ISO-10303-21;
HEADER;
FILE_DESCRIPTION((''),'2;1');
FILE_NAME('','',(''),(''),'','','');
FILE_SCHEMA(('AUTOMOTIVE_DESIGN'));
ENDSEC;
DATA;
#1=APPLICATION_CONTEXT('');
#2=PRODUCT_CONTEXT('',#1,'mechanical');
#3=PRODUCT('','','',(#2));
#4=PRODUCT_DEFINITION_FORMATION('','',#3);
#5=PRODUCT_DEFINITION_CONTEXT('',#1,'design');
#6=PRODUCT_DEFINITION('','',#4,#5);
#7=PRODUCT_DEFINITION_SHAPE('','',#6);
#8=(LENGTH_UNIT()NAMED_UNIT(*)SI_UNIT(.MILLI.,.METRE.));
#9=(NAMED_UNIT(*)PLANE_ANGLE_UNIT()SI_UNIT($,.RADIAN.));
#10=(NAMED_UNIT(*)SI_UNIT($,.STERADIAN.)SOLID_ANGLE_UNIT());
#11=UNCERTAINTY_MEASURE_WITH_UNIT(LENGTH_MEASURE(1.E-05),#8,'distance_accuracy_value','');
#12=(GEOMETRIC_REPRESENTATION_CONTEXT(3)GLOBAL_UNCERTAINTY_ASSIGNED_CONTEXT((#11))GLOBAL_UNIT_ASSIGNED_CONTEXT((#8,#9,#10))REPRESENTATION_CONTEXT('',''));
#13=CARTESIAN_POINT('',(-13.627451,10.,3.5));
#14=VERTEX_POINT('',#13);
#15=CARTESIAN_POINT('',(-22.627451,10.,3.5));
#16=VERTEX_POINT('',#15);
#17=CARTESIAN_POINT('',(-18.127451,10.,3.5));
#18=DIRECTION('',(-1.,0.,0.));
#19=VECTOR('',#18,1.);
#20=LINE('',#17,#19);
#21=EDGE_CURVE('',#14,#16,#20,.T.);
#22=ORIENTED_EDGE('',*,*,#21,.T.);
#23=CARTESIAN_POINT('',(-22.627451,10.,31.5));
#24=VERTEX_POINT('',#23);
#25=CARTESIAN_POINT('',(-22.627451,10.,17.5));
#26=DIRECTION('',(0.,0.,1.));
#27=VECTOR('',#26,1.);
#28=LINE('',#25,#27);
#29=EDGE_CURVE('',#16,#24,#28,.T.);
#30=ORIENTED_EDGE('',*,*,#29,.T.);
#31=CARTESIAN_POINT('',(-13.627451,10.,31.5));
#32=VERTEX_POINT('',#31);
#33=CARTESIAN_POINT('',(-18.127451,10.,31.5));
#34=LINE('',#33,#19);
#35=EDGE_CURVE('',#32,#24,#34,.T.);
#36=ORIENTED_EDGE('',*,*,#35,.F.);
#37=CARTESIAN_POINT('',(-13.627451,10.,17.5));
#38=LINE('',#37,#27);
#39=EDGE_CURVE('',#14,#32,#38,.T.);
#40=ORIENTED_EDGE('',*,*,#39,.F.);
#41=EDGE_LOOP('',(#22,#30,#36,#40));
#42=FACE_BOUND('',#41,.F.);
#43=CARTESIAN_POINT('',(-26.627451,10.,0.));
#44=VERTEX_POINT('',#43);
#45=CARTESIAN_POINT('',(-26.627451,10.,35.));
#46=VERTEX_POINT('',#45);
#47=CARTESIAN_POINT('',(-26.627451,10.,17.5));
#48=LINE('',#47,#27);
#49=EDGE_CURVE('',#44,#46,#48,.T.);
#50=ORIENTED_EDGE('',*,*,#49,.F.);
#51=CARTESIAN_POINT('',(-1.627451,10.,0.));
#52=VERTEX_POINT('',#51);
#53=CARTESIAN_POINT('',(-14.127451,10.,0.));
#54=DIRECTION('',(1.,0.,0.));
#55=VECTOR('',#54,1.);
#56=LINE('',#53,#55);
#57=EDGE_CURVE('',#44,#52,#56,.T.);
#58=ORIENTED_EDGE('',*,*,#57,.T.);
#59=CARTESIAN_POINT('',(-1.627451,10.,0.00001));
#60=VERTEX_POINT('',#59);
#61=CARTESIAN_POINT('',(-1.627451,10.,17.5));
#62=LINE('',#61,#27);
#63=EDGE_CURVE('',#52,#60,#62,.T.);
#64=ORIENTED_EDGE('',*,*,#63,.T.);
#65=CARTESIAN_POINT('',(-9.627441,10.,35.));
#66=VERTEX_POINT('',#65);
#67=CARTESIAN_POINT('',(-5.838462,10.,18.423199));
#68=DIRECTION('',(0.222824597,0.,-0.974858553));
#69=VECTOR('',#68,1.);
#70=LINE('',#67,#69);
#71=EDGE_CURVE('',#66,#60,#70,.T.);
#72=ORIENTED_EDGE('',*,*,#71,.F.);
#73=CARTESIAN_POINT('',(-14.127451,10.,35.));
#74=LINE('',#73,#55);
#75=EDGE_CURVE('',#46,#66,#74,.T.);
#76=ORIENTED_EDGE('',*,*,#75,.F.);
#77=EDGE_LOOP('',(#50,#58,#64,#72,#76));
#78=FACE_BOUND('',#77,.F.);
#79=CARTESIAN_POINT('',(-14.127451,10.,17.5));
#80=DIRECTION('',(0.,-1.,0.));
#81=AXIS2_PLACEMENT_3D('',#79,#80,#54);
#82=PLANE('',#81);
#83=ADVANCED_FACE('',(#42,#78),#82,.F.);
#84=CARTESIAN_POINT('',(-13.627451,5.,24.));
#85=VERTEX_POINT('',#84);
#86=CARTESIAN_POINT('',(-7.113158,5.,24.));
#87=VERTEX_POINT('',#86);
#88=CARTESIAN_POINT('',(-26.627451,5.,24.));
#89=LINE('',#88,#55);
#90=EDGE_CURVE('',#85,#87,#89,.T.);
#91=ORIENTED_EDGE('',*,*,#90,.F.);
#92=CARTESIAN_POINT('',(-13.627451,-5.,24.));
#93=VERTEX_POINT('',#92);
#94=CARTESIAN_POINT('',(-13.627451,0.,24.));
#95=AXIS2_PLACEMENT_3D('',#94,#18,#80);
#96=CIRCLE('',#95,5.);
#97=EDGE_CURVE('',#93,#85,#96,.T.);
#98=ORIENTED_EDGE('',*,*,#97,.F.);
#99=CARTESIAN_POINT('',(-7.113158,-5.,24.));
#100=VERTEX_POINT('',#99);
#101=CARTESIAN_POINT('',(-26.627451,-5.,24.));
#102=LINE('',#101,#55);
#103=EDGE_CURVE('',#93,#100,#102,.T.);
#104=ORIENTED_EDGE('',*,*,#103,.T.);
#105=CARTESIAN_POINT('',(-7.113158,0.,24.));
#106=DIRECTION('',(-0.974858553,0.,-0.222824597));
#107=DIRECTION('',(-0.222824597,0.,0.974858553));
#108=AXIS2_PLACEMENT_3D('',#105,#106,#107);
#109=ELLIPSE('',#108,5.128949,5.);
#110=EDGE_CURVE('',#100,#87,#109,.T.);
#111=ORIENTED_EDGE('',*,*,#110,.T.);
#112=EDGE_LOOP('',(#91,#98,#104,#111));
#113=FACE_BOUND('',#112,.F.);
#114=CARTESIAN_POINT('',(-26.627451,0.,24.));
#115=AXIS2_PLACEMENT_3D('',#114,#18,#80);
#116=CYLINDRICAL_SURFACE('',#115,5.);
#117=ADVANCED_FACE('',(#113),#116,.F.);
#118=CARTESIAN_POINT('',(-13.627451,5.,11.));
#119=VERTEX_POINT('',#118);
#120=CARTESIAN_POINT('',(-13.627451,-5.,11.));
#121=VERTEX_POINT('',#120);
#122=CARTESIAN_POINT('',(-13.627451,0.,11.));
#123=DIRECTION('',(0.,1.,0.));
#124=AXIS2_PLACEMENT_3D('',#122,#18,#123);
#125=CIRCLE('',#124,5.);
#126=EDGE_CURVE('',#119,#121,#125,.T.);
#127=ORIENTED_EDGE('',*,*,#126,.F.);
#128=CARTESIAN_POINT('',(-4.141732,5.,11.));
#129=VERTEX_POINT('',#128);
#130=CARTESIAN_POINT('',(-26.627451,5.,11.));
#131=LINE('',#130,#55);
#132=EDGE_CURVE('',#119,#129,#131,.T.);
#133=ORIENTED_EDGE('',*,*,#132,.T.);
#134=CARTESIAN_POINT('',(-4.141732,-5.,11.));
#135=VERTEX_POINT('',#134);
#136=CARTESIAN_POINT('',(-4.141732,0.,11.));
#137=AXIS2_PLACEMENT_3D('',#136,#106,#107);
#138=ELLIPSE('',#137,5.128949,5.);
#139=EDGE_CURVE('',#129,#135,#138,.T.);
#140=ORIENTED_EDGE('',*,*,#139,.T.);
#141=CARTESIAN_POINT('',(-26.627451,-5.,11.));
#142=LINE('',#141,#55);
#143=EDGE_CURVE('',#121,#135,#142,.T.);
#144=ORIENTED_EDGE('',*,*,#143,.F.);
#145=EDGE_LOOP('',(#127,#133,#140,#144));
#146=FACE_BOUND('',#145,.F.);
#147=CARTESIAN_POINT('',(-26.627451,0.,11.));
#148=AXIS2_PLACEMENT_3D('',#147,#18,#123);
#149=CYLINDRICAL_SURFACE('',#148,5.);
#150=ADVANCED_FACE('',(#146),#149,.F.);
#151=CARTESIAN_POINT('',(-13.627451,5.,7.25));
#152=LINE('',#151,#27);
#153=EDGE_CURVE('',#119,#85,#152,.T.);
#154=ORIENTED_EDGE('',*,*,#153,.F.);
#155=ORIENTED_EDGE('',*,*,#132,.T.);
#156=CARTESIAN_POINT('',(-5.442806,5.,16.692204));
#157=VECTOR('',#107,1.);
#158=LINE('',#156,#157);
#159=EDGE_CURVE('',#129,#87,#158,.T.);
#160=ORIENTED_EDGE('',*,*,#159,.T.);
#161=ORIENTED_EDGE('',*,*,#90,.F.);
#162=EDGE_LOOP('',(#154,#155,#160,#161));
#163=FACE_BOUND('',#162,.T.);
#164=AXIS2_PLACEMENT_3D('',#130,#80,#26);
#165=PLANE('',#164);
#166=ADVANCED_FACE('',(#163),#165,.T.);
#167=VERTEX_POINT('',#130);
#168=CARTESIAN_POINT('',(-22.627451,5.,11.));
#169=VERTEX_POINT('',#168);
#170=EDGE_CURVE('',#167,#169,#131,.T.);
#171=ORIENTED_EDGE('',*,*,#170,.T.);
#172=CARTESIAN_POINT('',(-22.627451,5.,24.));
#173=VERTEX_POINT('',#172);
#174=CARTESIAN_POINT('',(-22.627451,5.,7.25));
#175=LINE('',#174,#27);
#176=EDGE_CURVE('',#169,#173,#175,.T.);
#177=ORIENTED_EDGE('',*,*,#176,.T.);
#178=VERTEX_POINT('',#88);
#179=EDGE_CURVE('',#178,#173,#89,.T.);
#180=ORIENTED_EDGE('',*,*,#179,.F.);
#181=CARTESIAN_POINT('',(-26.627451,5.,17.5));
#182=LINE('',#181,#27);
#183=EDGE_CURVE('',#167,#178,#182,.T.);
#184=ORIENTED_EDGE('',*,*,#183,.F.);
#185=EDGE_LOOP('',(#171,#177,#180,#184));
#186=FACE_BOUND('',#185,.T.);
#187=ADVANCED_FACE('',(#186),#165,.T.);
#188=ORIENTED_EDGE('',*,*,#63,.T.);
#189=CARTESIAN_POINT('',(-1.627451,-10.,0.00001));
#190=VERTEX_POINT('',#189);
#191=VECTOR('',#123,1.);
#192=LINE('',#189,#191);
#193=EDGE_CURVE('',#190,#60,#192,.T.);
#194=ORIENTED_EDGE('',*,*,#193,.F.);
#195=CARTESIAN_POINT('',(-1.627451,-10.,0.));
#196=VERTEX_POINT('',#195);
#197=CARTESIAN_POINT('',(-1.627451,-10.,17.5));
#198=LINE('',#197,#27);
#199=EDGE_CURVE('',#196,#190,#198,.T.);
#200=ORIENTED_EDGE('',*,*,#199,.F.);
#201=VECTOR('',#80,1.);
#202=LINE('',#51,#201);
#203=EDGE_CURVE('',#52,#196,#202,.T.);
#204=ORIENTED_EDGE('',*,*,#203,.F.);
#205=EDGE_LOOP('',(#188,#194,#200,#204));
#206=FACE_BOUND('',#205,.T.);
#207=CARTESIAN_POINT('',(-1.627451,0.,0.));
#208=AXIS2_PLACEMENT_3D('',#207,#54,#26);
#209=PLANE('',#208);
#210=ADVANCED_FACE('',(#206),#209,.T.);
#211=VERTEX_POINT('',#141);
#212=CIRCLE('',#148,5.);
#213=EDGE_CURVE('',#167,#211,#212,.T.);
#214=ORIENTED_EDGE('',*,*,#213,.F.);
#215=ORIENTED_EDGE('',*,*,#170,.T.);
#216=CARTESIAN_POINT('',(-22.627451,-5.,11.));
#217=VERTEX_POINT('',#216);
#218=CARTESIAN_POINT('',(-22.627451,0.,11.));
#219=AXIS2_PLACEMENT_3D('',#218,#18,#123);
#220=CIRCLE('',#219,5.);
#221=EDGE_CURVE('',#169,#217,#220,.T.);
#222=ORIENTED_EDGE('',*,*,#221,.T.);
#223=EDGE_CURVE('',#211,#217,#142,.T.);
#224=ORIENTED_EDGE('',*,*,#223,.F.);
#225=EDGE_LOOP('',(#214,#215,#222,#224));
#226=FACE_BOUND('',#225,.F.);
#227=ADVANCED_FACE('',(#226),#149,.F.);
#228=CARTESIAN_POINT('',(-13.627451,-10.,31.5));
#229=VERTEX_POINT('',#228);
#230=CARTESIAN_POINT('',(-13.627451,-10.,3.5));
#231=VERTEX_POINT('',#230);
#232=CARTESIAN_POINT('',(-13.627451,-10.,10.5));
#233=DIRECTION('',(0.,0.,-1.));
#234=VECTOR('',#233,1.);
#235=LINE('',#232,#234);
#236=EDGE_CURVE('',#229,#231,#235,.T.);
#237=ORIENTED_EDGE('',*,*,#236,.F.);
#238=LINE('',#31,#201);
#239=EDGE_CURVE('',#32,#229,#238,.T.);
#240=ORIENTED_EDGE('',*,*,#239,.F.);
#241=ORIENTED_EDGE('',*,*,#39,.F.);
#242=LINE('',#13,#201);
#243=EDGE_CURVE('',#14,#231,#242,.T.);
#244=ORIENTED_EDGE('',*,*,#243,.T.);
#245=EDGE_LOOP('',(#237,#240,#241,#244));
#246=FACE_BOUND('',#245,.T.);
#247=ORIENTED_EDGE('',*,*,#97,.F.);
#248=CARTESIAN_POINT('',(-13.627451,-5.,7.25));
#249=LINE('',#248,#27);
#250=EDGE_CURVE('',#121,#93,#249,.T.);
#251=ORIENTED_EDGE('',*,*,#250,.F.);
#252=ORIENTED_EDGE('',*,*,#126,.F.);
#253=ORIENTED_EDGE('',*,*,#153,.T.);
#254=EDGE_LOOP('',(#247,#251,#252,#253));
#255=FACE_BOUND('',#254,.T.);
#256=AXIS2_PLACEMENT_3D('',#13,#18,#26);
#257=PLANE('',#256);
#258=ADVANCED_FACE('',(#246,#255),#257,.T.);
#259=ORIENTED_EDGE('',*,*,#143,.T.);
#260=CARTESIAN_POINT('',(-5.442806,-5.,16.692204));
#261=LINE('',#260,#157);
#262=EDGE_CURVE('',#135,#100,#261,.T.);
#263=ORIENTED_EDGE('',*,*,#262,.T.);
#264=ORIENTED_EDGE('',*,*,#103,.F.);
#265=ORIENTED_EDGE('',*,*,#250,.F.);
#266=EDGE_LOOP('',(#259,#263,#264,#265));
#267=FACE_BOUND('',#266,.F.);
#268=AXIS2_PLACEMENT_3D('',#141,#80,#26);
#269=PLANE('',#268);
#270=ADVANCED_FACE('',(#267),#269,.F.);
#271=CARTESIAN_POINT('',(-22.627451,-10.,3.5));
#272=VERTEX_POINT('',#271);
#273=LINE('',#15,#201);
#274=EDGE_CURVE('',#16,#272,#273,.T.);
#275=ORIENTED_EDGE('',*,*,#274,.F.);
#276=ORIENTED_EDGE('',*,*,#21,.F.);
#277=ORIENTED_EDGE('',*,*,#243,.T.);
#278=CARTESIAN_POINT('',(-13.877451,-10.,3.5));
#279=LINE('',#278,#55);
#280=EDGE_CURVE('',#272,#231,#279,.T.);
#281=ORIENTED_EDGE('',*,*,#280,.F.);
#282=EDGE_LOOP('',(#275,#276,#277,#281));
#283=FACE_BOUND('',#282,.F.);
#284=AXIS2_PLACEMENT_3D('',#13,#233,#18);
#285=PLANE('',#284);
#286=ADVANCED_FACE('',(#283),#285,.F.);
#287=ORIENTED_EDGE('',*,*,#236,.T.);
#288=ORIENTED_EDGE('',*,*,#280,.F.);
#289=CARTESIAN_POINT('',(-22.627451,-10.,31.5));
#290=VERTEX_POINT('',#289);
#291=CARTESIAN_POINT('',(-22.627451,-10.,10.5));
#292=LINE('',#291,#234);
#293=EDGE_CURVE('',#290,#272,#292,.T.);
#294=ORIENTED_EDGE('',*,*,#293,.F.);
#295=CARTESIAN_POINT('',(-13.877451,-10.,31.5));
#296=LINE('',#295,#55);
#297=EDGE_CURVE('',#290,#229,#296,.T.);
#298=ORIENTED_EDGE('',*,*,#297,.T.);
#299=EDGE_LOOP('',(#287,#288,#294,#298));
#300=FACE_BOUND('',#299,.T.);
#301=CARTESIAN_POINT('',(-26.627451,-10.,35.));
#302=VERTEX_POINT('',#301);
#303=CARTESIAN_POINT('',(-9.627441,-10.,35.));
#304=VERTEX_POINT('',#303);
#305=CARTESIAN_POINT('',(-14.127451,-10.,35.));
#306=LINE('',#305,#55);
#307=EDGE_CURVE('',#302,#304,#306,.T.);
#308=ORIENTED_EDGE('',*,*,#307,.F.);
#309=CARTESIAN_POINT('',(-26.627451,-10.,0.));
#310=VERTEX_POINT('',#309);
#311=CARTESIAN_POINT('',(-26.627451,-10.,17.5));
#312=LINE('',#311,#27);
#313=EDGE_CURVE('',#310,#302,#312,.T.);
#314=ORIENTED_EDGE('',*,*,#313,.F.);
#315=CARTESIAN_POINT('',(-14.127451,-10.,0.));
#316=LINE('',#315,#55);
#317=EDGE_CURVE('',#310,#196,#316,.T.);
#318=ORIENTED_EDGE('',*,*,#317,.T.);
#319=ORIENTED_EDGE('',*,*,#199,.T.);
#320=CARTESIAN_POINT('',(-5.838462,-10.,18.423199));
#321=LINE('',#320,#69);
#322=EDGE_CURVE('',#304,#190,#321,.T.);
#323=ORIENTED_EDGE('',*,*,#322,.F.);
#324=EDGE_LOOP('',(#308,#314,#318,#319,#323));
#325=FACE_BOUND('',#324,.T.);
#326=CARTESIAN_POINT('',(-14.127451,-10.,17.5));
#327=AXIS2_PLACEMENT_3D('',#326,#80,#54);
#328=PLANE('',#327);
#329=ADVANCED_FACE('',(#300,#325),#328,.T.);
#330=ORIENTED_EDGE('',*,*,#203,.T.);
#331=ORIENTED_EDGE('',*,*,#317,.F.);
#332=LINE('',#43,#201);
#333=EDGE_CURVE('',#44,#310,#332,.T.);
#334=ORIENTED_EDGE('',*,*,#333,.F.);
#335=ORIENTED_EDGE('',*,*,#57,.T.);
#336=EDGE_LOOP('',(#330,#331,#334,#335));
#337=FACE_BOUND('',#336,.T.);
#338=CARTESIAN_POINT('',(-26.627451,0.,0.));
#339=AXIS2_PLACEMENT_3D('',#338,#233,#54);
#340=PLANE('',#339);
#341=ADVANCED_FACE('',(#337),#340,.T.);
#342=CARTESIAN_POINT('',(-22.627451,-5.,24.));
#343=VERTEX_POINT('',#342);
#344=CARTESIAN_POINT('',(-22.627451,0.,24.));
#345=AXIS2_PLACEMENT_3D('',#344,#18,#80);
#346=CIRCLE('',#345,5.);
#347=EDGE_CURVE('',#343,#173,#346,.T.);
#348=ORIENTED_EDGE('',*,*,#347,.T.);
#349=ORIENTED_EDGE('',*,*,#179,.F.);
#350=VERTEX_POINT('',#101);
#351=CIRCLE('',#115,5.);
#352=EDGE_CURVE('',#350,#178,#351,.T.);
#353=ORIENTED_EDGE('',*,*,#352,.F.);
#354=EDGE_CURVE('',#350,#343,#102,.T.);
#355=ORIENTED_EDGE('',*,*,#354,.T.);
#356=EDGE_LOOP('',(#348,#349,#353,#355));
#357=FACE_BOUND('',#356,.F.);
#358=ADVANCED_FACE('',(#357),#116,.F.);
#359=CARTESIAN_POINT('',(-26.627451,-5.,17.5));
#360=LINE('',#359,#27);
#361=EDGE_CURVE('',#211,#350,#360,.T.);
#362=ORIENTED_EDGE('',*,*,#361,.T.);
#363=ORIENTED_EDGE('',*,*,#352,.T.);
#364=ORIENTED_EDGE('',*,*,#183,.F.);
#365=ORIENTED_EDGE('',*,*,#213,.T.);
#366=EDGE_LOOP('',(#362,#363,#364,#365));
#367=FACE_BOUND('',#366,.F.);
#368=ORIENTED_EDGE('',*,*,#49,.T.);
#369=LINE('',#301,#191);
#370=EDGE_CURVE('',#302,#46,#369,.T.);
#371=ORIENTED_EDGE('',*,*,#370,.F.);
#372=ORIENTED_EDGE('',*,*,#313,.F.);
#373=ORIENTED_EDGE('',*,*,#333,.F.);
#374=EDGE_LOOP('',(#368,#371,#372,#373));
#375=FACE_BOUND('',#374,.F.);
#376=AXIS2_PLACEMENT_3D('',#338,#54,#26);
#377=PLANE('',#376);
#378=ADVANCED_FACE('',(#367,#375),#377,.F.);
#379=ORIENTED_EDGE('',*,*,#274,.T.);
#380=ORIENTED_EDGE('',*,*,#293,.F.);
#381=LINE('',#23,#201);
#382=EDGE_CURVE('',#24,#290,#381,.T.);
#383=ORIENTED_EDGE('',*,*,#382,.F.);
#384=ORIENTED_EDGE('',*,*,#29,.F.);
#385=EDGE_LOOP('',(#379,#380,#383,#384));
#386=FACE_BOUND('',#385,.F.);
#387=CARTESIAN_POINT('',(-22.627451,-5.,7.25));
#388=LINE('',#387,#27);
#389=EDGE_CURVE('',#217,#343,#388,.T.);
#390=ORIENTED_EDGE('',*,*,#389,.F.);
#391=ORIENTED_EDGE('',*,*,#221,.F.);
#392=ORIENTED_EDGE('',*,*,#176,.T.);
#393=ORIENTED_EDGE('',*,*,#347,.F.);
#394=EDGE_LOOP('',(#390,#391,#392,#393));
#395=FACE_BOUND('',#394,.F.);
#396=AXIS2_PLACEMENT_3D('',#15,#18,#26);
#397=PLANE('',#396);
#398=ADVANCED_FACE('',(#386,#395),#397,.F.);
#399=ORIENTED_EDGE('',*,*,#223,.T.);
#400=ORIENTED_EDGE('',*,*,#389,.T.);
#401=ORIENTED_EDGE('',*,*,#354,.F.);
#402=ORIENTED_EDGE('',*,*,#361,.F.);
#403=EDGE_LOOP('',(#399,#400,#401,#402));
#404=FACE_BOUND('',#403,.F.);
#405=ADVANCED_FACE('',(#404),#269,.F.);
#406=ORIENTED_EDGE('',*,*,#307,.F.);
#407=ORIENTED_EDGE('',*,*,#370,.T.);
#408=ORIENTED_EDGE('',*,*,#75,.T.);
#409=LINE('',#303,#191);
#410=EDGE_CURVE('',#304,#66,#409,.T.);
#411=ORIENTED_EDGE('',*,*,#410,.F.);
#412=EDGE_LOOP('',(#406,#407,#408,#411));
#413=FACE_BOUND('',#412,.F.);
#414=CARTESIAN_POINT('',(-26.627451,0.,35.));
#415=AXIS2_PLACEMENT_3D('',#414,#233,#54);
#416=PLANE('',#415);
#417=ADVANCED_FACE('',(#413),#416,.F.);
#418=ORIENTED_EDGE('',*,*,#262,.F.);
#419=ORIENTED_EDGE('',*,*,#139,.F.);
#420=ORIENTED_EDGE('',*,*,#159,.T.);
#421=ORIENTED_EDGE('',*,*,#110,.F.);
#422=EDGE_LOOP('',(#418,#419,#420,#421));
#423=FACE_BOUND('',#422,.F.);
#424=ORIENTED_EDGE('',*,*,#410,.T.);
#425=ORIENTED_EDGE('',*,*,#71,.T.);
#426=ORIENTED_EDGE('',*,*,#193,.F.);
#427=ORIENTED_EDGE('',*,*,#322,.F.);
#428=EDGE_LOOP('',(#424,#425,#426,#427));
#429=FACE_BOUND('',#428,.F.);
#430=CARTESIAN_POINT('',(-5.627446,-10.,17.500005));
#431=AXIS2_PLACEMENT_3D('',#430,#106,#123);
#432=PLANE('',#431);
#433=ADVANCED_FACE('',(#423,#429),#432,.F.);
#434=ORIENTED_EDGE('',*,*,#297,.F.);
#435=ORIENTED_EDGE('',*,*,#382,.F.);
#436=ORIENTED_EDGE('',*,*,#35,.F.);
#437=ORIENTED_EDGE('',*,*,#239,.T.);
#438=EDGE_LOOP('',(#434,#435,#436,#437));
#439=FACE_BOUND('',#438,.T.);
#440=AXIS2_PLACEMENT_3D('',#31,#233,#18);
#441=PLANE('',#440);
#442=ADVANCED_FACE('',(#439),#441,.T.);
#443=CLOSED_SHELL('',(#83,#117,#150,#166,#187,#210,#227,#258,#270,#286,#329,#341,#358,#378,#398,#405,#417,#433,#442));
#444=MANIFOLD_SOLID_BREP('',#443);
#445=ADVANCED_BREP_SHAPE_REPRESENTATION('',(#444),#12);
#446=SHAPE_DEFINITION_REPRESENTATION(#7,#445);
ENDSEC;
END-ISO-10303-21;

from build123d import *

# Parameters (mm, degrees)
F0_W     = 25
F0_H     = 35
F1_DEPTH = 10
F2_SIZE2 = 34.99999
F2_SIZE  = 7.99999
F3_W     = 9
F3_H     = 28
F4_DEPTH = 33.35697
F5_W     = 10
F5_H     = 13
F6_DEPTH = 25


# Not quite as in the source:
# - a fillet or chamfer is up to 0.001 mm smaller than in the source, because OpenCascade refuses the exact size


with BuildPart() as f1:
    # F0 (on Front) → F1 (new body, symmetric)
    with BuildSketch(Plane.XZ):
        with Locations((-14.1274514172, 17.5)):
            Rectangle(F0_W, F0_H)
    extrude(amount=F1_DEPTH, both=True)

    # F2 (size 8 and 35 in the source; OpenCascade refuses exactly that, so slightly less here)
    f2_edges = [f1.edges().sort_by_distance(p)[0] for p in [
        (-1.627451, 0, 35),
    ]]
    f2_side = f1.faces().sort_by_distance((-14.127451, 0, 35))[0]
    chamfer(f2_edges, length=F2_SIZE, length2=F2_SIZE2, reference=f2_side)

    # F3 (on face) → F4 (cut)
    with BuildSketch(Plane(origin=(0, 10, 0), x_dir=(-1, 0, 0), z_dir=(0, 1, 0))):
        with Locations((18.1274514172, 17.5)):
            Rectangle(F3_W, F3_H)
    extrude(amount=-F4_DEPTH, mode=Mode.SUBTRACT)

    # F5 (on face) → F6 (cut)
    with BuildSketch(Plane(origin=(-26.6274514172, 0, 0), x_dir=(0, -1, 0), z_dir=(-1, 0, 0))):
        with BuildLine():
            ThreePointArc((5, 24), (0, 29), (-5, 24))
            Line((-5, 24), (5, 24))
        make_face()
        with Locations((0, 17.5)):
            Rectangle(F5_W, F5_H)
        with BuildLine():
            Line((5, 11), (-5, 11))
            ThreePointArc((-5, 11), (0, 6), (5, 11))
        make_face()
    extrude(amount=-F6_DEPTH, mode=Mode.SUBTRACT)


solid = f1.part
